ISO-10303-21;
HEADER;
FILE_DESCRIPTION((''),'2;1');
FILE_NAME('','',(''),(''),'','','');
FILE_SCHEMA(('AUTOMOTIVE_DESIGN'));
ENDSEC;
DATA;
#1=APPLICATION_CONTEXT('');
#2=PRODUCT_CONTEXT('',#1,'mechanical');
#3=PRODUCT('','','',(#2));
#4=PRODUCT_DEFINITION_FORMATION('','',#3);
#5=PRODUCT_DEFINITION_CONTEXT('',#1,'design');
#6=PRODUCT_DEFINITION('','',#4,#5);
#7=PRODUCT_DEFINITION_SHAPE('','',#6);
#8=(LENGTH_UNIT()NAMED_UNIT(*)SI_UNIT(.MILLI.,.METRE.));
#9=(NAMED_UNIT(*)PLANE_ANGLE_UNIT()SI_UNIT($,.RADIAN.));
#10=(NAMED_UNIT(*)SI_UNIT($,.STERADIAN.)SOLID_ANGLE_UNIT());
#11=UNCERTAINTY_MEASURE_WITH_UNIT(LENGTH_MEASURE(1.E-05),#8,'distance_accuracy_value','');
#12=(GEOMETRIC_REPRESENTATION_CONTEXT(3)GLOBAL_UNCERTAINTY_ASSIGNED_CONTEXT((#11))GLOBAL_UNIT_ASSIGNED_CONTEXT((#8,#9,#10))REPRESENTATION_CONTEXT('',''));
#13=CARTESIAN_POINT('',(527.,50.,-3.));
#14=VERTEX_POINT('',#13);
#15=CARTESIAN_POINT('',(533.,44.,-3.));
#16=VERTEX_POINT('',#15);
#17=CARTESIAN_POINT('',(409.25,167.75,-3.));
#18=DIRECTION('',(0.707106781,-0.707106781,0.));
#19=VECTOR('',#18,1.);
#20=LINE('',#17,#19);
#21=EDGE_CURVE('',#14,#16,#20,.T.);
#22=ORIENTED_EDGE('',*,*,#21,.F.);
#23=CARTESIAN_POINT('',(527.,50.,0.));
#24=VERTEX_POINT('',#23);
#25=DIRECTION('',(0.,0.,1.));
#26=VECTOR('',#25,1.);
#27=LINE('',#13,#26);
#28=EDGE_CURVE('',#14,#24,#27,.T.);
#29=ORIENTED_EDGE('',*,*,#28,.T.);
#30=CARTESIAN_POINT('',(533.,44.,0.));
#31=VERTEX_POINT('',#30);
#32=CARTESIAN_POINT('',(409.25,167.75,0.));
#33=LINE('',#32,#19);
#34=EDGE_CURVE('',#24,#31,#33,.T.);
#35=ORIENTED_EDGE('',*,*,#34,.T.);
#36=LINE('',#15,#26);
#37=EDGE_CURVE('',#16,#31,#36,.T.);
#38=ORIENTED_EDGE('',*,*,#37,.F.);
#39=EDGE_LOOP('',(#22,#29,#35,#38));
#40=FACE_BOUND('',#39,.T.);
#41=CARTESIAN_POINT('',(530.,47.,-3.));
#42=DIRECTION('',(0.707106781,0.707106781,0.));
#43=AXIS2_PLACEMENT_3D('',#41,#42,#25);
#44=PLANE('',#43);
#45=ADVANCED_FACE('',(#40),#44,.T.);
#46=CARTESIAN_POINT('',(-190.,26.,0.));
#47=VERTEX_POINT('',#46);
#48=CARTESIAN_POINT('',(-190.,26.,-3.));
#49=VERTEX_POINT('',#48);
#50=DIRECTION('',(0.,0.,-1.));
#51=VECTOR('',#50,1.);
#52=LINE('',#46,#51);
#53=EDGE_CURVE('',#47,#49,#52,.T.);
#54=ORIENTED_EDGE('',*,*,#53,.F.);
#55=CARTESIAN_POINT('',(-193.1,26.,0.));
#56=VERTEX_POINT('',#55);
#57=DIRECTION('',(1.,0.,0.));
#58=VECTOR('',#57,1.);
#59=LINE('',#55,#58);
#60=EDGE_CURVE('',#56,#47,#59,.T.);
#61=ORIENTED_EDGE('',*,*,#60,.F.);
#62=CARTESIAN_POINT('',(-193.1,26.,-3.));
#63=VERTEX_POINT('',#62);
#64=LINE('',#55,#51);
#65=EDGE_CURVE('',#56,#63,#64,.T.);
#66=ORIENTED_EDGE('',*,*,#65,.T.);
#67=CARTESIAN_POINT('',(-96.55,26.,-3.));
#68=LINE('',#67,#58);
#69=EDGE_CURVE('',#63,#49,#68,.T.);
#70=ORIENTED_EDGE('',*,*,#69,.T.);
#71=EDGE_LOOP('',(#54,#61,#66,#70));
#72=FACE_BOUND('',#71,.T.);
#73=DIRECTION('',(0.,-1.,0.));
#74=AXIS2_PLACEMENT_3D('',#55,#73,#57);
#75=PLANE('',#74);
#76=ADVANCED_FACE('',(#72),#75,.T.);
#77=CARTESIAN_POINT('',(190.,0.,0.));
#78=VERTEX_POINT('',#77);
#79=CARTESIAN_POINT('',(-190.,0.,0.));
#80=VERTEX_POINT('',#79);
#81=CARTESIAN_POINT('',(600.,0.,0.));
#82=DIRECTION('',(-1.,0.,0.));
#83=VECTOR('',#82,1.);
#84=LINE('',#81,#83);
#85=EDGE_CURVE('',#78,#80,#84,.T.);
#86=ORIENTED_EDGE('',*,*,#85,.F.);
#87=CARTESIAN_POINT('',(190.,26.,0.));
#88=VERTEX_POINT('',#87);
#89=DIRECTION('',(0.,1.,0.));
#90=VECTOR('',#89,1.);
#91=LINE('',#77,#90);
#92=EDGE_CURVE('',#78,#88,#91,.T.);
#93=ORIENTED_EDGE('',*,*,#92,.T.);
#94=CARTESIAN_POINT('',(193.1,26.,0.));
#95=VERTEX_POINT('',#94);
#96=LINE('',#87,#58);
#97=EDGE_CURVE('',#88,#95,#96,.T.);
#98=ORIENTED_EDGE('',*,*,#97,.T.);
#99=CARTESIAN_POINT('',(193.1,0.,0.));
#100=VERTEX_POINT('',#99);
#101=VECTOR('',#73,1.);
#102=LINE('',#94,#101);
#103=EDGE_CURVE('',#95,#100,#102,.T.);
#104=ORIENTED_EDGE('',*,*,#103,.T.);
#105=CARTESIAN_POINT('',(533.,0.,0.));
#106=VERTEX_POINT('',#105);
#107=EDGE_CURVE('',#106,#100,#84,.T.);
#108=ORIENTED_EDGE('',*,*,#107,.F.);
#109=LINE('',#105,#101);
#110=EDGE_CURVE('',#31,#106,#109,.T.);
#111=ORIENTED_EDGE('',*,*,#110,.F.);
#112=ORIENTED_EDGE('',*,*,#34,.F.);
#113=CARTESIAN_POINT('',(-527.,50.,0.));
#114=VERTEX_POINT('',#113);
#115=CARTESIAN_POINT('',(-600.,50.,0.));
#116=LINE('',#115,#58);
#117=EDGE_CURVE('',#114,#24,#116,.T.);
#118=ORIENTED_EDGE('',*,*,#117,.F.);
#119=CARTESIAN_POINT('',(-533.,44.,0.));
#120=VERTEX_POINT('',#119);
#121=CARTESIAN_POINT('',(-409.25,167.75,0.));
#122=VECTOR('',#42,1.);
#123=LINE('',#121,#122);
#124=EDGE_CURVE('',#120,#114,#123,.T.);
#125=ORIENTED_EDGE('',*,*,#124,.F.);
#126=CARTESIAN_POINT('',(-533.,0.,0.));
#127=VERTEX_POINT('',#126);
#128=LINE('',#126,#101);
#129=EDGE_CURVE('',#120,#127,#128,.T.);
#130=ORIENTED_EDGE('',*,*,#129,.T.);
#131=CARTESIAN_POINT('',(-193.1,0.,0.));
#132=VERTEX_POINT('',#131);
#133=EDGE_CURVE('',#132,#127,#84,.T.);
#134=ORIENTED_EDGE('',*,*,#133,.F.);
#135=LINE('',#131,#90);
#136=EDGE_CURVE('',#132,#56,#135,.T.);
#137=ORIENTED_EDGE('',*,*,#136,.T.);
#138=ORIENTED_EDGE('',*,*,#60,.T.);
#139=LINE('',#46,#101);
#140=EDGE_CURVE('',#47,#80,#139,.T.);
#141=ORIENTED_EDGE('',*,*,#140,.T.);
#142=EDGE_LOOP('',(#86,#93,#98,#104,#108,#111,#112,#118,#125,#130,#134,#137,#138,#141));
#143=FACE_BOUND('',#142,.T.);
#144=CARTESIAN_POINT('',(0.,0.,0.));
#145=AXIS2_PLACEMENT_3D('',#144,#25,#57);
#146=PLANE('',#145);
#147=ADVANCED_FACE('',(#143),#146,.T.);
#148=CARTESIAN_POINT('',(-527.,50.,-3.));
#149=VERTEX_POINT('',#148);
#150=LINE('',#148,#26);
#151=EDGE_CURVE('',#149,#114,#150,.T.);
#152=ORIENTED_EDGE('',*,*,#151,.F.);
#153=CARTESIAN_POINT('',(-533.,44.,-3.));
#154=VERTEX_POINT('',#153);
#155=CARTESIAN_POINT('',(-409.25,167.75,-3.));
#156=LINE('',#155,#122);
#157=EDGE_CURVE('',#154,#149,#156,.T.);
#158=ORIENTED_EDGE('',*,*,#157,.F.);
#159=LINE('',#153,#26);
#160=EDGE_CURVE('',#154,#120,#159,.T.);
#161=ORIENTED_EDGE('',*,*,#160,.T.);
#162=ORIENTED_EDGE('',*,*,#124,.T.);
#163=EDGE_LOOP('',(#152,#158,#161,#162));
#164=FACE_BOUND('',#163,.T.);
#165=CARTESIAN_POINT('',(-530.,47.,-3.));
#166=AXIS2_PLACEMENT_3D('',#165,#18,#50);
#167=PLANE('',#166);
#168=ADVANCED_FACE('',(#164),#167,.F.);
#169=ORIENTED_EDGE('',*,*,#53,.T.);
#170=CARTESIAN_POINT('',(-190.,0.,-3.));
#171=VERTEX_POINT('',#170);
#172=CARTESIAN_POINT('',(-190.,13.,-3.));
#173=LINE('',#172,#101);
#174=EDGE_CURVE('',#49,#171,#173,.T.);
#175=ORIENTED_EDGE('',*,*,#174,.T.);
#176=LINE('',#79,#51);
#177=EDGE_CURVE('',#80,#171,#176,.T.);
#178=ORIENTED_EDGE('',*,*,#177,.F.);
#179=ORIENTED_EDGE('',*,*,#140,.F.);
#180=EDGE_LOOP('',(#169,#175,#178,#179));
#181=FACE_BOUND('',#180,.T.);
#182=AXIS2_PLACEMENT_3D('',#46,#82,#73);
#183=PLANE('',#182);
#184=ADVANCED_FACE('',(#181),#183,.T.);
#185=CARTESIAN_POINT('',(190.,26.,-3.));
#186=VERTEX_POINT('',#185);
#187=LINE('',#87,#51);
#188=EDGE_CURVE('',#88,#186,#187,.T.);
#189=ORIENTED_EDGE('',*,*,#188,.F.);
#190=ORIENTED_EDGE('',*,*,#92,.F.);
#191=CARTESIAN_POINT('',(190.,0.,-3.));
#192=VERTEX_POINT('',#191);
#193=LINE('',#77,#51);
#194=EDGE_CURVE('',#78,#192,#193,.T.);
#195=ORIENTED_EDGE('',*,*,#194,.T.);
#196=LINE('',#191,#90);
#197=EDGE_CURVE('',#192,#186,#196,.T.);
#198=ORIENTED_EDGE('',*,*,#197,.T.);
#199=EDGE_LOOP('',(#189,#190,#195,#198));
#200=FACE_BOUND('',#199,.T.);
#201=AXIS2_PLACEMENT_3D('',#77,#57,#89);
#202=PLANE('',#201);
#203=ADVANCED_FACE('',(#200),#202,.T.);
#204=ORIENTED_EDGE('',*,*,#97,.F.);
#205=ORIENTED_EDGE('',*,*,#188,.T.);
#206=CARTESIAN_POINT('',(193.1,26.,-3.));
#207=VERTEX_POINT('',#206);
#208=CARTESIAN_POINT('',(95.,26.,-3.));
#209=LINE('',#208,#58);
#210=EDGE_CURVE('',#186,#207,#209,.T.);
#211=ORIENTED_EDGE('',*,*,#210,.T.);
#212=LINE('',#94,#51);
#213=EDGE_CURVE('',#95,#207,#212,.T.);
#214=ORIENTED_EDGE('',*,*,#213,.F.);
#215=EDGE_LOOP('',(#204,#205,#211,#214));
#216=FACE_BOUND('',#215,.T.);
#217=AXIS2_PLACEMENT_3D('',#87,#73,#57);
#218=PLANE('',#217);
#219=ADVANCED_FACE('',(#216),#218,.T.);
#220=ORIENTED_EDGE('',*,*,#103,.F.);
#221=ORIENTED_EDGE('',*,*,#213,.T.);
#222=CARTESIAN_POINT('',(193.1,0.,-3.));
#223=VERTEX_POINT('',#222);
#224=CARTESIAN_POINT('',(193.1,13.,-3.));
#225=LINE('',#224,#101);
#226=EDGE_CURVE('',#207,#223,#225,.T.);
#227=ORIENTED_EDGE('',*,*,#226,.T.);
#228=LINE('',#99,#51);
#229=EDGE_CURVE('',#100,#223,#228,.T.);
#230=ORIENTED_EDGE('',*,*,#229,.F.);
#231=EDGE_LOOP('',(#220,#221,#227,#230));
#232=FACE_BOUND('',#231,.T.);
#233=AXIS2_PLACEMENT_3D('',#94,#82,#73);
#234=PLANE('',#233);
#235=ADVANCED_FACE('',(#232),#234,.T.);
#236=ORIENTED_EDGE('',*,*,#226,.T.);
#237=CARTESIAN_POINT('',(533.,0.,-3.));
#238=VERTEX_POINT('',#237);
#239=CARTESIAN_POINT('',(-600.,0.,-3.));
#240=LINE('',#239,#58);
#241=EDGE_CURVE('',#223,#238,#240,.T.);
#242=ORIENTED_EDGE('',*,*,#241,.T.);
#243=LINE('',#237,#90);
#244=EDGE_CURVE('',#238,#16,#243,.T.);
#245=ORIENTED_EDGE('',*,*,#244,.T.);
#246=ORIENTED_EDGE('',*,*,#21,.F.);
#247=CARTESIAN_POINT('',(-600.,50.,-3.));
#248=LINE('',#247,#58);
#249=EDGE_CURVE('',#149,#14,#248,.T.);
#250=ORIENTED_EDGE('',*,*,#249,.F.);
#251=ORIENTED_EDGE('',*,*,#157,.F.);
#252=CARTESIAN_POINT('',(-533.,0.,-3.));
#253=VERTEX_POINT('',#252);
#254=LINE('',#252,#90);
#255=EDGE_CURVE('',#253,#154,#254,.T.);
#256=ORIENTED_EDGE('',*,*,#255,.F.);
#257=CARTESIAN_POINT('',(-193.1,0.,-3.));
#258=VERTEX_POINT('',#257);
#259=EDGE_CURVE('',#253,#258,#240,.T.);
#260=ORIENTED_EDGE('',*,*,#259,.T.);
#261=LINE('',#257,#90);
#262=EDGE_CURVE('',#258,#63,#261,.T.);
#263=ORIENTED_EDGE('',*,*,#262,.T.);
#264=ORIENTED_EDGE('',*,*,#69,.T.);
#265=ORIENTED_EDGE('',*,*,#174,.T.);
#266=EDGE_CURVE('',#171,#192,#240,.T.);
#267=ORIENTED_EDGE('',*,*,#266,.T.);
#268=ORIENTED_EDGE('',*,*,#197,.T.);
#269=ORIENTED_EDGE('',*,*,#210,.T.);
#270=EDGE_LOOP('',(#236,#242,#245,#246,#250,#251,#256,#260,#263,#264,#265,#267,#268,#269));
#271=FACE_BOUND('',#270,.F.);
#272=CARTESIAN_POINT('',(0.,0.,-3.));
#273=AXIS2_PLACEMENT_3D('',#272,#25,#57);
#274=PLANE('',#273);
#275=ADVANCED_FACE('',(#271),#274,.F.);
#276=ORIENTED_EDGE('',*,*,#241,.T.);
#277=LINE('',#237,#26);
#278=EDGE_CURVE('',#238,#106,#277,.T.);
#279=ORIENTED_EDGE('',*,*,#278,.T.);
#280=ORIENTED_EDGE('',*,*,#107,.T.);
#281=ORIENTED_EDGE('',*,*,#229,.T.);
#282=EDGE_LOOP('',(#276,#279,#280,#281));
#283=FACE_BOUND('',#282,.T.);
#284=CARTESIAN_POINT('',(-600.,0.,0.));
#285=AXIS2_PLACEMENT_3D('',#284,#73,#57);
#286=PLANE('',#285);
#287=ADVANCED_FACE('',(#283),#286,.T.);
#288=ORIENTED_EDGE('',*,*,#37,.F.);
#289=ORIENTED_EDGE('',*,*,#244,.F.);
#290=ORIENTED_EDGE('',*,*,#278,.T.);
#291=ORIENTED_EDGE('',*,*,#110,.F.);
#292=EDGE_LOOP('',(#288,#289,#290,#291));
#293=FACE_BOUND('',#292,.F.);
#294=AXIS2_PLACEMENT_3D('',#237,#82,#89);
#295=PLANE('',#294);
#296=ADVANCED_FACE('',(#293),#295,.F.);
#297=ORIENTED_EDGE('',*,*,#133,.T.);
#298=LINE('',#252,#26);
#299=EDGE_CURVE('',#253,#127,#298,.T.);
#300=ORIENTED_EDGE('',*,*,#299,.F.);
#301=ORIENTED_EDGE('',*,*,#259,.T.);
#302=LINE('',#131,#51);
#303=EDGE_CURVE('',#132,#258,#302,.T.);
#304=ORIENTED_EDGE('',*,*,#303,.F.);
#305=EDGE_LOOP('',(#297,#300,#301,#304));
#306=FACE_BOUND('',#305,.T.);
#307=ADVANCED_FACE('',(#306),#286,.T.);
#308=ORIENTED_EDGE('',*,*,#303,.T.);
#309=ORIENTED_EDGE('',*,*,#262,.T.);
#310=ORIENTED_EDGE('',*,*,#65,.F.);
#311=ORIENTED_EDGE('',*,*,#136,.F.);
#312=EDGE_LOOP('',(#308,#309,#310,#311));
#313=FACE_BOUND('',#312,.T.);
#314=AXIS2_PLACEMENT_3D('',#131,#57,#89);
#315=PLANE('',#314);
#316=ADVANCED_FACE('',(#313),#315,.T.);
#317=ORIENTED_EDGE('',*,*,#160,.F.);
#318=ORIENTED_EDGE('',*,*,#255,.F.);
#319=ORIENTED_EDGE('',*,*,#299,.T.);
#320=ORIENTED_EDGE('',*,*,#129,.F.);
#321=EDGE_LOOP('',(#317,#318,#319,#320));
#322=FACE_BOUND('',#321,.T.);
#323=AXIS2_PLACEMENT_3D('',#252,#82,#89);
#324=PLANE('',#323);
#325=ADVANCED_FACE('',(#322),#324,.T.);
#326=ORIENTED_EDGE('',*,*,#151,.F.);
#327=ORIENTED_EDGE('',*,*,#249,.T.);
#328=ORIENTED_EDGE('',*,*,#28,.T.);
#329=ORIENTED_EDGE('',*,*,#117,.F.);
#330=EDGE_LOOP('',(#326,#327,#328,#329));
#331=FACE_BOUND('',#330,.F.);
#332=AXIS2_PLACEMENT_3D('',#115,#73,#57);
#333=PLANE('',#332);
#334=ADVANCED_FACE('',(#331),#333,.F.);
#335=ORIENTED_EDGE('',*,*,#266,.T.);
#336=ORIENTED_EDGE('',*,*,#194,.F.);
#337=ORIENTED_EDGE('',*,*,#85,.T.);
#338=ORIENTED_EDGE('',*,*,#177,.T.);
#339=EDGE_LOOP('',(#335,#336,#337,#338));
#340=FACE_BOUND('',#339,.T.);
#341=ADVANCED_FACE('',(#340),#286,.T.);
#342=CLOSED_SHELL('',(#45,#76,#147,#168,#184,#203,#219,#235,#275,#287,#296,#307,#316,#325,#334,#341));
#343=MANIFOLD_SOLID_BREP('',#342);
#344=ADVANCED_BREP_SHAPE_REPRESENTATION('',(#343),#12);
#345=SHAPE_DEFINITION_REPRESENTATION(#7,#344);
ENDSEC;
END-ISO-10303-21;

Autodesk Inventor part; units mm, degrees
ref_plane "YZ Plane" through (0, 0, 0) normal (1, 0, 0) x (0, 1, 0)
ref_plane "XZ Plane" through (0, 0, 0) normal (0, 1, 0) x (-1, 0, 0)
ref_plane "XY Plane" through (0, 0, 0) normal (0, 0, 1) x (1, 0, 0)
sketch "Sketch1" plane through (0, 0, 0) normal (0, 0, 1) x (1, 0, 0)
  line L0 (-600, 0) -> (600, 0)
  line L1 (-600, 0) -> (-600, 50)
  line L2 (-600, 50) -> (600, 50)
  line L3 (600, 50) -> (600, 0)
  circle A0 centre (-600, 0) radius 25
  circle A1 centre (600, 0) radius 25
  line L4 (600, 0) -> (644.2345, 16.1001)
  line L5 (644.2345, 16.1001) -> (635, 50)
  line L6 (635, 50) -> (600, 50)
  point P0 (0, 0)
  point P1 (0, 0)
  point P2 (-600, 25)
  point P3 (-575, 0)
  point P4 (575, 0)
  point P5 (600, 25)
  point P6 (623.4923, 8.5505)
  dimension "d18" = 50
  dimension "d19" = 1200
  dimension "d25" = 50
  dimension "d26" = 50
  dimension "d39" = 70
  dimension "d40" = 35
extrude "Plate2" add sketch "Sketch1" against normal blind 3 contours L1 A0 L0 | A0 L1 L2 L3 A1 L0 | A1 L3 L0 picked at (-598.1457, 16.4577)
sketch "Sketch3" plane through (0, 0, 0) normal (0, 0, 1) x (1, 0, 0)
  line L0 (-191.55, 0) -> (-191.55, 50) construction
  line L1 (600, 50) -> (-600, 50) construction
  line L2 (-600, 50) -> (-600, 0) projected
  line L3 (-193.1, 26) -> (-190, 26)
  line L4 (-190, 26) -> (-190, 0)
  line L5 (-190, 0) -> (-193.1, 0)
  line L6 (-193.1, 0) -> (-193.1, 26)
  line L7 (-600, 0) -> (600, 0) projected
  line L8 (191.55, 50) -> (191.55, 0) construction
  line L9 (190, 26) -> (193.1, 26)
  line L10 (193.1, 26) -> (193.1, 0)
  line L11 (193.1, 0) -> (190, 0)
  line L12 (190, 0) -> (190, 26)
  line L13 (0, 0) -> (0, 50) construction
  point P0 (0, 0)
  point P1 (190, 0)
  point P2 (193.1, 0)
  dimension "d28" = 3.1
  dimension "d29" = 26
  dimension "d52" = 380
extrude "Extrusion2" cut sketch "Sketch3" against normal through all
sketch "Sketch4" plane through (0, 0, -3) normal (0, 0, -1) x (-1, 0, 0)
  line L0 (190, 0) -> (190, 26) projected
  line L1 (190, 26) -> (193.1, 26) projected
  line L2 (193.1, 26) -> (193.1, 0) projected
  line L3 (600, 0) -> (193.1, 0) projected
  line L4 (600, 50) -> (600, 0) projected
  line L5 (-600, 50) -> (600, 50) projected
  line L6 (-600, 0) -> (-600, 50) projected
  line L7 (-193.1, 0) -> (-600, 0) projected
  line L8 (-193.1, 0) -> (-193.1, 26) projected
  line L9 (-193.1, 26) -> (-190, 26) projected
  line L10 (-190, 26) -> (-190, 0) projected
  line L11 (190, 0) -> (-190, 0) projected
  line L12 (-533, 0) -> (-533, 50)
  line L13 (-600, 50) -> (600, 50) projected
  line L14 (600, 0) -> (193.1, 0) projected
  line L15 (533, 0) -> (533, 50)
  point P0 (0, 0)
  point P1 (533, 0)
  dimension "d45" = 67
  dimension "d46" = 67
extrude "Extrusion3" cut sketch "Sketch4" against normal through all contours L15 L5 L4 L3 | L7 L6 L5 L12
sketch "Sketch5" plane through (0, 0, 0) normal (0, 0, 1) x (1, 0, 0)
  line L0 (-55.7541, 0.5014) -> (-55.7541, 31.0924) construction
  line L1 (-55.7541, 31.0924) -> (66.2742, 31.0924) construction
  line L2 (66.2742, 31.0924) -> (66.2742, 0.5014) construction
  line L3 (66.2742, 0.5014) -> (-55.7541, 0.5014) construction
  line L4 (533, 50) -> (-533, 50) projected
  line L5 (-533, 50) -> (-533, 0) projected
  point P0 (0, 0)
mark "Mark1"
chamfer "Corner Chamfer1" distance 6 angle 45 2 edges at (-533, 50, -1.5) (533, 50, -1.5)
equation "\"d46\" = d45"
equation "\"d20\" = Thickness"
equation "\"BendReliefWidth\" = Thickness"
equation "\"BendReliefDepth\" = 0.5 * Thickness"
equation "\"CornerReliefSize\" = 4 * Thickness"
equation "\"MinimumRemnant\" = 2 * Thickness"
equation "\"TransitionRadius\" = BendRadius"
equation "\"JacobiRadiusSize\" = BendRadius"
equation "\"GapSize\" = Thickness"
equation "\"Thickness\" = 3"
equation "\"BendRadius\" = 5"
properties part number "MSC 106 RIB CONE" material "Stainless Steel"
